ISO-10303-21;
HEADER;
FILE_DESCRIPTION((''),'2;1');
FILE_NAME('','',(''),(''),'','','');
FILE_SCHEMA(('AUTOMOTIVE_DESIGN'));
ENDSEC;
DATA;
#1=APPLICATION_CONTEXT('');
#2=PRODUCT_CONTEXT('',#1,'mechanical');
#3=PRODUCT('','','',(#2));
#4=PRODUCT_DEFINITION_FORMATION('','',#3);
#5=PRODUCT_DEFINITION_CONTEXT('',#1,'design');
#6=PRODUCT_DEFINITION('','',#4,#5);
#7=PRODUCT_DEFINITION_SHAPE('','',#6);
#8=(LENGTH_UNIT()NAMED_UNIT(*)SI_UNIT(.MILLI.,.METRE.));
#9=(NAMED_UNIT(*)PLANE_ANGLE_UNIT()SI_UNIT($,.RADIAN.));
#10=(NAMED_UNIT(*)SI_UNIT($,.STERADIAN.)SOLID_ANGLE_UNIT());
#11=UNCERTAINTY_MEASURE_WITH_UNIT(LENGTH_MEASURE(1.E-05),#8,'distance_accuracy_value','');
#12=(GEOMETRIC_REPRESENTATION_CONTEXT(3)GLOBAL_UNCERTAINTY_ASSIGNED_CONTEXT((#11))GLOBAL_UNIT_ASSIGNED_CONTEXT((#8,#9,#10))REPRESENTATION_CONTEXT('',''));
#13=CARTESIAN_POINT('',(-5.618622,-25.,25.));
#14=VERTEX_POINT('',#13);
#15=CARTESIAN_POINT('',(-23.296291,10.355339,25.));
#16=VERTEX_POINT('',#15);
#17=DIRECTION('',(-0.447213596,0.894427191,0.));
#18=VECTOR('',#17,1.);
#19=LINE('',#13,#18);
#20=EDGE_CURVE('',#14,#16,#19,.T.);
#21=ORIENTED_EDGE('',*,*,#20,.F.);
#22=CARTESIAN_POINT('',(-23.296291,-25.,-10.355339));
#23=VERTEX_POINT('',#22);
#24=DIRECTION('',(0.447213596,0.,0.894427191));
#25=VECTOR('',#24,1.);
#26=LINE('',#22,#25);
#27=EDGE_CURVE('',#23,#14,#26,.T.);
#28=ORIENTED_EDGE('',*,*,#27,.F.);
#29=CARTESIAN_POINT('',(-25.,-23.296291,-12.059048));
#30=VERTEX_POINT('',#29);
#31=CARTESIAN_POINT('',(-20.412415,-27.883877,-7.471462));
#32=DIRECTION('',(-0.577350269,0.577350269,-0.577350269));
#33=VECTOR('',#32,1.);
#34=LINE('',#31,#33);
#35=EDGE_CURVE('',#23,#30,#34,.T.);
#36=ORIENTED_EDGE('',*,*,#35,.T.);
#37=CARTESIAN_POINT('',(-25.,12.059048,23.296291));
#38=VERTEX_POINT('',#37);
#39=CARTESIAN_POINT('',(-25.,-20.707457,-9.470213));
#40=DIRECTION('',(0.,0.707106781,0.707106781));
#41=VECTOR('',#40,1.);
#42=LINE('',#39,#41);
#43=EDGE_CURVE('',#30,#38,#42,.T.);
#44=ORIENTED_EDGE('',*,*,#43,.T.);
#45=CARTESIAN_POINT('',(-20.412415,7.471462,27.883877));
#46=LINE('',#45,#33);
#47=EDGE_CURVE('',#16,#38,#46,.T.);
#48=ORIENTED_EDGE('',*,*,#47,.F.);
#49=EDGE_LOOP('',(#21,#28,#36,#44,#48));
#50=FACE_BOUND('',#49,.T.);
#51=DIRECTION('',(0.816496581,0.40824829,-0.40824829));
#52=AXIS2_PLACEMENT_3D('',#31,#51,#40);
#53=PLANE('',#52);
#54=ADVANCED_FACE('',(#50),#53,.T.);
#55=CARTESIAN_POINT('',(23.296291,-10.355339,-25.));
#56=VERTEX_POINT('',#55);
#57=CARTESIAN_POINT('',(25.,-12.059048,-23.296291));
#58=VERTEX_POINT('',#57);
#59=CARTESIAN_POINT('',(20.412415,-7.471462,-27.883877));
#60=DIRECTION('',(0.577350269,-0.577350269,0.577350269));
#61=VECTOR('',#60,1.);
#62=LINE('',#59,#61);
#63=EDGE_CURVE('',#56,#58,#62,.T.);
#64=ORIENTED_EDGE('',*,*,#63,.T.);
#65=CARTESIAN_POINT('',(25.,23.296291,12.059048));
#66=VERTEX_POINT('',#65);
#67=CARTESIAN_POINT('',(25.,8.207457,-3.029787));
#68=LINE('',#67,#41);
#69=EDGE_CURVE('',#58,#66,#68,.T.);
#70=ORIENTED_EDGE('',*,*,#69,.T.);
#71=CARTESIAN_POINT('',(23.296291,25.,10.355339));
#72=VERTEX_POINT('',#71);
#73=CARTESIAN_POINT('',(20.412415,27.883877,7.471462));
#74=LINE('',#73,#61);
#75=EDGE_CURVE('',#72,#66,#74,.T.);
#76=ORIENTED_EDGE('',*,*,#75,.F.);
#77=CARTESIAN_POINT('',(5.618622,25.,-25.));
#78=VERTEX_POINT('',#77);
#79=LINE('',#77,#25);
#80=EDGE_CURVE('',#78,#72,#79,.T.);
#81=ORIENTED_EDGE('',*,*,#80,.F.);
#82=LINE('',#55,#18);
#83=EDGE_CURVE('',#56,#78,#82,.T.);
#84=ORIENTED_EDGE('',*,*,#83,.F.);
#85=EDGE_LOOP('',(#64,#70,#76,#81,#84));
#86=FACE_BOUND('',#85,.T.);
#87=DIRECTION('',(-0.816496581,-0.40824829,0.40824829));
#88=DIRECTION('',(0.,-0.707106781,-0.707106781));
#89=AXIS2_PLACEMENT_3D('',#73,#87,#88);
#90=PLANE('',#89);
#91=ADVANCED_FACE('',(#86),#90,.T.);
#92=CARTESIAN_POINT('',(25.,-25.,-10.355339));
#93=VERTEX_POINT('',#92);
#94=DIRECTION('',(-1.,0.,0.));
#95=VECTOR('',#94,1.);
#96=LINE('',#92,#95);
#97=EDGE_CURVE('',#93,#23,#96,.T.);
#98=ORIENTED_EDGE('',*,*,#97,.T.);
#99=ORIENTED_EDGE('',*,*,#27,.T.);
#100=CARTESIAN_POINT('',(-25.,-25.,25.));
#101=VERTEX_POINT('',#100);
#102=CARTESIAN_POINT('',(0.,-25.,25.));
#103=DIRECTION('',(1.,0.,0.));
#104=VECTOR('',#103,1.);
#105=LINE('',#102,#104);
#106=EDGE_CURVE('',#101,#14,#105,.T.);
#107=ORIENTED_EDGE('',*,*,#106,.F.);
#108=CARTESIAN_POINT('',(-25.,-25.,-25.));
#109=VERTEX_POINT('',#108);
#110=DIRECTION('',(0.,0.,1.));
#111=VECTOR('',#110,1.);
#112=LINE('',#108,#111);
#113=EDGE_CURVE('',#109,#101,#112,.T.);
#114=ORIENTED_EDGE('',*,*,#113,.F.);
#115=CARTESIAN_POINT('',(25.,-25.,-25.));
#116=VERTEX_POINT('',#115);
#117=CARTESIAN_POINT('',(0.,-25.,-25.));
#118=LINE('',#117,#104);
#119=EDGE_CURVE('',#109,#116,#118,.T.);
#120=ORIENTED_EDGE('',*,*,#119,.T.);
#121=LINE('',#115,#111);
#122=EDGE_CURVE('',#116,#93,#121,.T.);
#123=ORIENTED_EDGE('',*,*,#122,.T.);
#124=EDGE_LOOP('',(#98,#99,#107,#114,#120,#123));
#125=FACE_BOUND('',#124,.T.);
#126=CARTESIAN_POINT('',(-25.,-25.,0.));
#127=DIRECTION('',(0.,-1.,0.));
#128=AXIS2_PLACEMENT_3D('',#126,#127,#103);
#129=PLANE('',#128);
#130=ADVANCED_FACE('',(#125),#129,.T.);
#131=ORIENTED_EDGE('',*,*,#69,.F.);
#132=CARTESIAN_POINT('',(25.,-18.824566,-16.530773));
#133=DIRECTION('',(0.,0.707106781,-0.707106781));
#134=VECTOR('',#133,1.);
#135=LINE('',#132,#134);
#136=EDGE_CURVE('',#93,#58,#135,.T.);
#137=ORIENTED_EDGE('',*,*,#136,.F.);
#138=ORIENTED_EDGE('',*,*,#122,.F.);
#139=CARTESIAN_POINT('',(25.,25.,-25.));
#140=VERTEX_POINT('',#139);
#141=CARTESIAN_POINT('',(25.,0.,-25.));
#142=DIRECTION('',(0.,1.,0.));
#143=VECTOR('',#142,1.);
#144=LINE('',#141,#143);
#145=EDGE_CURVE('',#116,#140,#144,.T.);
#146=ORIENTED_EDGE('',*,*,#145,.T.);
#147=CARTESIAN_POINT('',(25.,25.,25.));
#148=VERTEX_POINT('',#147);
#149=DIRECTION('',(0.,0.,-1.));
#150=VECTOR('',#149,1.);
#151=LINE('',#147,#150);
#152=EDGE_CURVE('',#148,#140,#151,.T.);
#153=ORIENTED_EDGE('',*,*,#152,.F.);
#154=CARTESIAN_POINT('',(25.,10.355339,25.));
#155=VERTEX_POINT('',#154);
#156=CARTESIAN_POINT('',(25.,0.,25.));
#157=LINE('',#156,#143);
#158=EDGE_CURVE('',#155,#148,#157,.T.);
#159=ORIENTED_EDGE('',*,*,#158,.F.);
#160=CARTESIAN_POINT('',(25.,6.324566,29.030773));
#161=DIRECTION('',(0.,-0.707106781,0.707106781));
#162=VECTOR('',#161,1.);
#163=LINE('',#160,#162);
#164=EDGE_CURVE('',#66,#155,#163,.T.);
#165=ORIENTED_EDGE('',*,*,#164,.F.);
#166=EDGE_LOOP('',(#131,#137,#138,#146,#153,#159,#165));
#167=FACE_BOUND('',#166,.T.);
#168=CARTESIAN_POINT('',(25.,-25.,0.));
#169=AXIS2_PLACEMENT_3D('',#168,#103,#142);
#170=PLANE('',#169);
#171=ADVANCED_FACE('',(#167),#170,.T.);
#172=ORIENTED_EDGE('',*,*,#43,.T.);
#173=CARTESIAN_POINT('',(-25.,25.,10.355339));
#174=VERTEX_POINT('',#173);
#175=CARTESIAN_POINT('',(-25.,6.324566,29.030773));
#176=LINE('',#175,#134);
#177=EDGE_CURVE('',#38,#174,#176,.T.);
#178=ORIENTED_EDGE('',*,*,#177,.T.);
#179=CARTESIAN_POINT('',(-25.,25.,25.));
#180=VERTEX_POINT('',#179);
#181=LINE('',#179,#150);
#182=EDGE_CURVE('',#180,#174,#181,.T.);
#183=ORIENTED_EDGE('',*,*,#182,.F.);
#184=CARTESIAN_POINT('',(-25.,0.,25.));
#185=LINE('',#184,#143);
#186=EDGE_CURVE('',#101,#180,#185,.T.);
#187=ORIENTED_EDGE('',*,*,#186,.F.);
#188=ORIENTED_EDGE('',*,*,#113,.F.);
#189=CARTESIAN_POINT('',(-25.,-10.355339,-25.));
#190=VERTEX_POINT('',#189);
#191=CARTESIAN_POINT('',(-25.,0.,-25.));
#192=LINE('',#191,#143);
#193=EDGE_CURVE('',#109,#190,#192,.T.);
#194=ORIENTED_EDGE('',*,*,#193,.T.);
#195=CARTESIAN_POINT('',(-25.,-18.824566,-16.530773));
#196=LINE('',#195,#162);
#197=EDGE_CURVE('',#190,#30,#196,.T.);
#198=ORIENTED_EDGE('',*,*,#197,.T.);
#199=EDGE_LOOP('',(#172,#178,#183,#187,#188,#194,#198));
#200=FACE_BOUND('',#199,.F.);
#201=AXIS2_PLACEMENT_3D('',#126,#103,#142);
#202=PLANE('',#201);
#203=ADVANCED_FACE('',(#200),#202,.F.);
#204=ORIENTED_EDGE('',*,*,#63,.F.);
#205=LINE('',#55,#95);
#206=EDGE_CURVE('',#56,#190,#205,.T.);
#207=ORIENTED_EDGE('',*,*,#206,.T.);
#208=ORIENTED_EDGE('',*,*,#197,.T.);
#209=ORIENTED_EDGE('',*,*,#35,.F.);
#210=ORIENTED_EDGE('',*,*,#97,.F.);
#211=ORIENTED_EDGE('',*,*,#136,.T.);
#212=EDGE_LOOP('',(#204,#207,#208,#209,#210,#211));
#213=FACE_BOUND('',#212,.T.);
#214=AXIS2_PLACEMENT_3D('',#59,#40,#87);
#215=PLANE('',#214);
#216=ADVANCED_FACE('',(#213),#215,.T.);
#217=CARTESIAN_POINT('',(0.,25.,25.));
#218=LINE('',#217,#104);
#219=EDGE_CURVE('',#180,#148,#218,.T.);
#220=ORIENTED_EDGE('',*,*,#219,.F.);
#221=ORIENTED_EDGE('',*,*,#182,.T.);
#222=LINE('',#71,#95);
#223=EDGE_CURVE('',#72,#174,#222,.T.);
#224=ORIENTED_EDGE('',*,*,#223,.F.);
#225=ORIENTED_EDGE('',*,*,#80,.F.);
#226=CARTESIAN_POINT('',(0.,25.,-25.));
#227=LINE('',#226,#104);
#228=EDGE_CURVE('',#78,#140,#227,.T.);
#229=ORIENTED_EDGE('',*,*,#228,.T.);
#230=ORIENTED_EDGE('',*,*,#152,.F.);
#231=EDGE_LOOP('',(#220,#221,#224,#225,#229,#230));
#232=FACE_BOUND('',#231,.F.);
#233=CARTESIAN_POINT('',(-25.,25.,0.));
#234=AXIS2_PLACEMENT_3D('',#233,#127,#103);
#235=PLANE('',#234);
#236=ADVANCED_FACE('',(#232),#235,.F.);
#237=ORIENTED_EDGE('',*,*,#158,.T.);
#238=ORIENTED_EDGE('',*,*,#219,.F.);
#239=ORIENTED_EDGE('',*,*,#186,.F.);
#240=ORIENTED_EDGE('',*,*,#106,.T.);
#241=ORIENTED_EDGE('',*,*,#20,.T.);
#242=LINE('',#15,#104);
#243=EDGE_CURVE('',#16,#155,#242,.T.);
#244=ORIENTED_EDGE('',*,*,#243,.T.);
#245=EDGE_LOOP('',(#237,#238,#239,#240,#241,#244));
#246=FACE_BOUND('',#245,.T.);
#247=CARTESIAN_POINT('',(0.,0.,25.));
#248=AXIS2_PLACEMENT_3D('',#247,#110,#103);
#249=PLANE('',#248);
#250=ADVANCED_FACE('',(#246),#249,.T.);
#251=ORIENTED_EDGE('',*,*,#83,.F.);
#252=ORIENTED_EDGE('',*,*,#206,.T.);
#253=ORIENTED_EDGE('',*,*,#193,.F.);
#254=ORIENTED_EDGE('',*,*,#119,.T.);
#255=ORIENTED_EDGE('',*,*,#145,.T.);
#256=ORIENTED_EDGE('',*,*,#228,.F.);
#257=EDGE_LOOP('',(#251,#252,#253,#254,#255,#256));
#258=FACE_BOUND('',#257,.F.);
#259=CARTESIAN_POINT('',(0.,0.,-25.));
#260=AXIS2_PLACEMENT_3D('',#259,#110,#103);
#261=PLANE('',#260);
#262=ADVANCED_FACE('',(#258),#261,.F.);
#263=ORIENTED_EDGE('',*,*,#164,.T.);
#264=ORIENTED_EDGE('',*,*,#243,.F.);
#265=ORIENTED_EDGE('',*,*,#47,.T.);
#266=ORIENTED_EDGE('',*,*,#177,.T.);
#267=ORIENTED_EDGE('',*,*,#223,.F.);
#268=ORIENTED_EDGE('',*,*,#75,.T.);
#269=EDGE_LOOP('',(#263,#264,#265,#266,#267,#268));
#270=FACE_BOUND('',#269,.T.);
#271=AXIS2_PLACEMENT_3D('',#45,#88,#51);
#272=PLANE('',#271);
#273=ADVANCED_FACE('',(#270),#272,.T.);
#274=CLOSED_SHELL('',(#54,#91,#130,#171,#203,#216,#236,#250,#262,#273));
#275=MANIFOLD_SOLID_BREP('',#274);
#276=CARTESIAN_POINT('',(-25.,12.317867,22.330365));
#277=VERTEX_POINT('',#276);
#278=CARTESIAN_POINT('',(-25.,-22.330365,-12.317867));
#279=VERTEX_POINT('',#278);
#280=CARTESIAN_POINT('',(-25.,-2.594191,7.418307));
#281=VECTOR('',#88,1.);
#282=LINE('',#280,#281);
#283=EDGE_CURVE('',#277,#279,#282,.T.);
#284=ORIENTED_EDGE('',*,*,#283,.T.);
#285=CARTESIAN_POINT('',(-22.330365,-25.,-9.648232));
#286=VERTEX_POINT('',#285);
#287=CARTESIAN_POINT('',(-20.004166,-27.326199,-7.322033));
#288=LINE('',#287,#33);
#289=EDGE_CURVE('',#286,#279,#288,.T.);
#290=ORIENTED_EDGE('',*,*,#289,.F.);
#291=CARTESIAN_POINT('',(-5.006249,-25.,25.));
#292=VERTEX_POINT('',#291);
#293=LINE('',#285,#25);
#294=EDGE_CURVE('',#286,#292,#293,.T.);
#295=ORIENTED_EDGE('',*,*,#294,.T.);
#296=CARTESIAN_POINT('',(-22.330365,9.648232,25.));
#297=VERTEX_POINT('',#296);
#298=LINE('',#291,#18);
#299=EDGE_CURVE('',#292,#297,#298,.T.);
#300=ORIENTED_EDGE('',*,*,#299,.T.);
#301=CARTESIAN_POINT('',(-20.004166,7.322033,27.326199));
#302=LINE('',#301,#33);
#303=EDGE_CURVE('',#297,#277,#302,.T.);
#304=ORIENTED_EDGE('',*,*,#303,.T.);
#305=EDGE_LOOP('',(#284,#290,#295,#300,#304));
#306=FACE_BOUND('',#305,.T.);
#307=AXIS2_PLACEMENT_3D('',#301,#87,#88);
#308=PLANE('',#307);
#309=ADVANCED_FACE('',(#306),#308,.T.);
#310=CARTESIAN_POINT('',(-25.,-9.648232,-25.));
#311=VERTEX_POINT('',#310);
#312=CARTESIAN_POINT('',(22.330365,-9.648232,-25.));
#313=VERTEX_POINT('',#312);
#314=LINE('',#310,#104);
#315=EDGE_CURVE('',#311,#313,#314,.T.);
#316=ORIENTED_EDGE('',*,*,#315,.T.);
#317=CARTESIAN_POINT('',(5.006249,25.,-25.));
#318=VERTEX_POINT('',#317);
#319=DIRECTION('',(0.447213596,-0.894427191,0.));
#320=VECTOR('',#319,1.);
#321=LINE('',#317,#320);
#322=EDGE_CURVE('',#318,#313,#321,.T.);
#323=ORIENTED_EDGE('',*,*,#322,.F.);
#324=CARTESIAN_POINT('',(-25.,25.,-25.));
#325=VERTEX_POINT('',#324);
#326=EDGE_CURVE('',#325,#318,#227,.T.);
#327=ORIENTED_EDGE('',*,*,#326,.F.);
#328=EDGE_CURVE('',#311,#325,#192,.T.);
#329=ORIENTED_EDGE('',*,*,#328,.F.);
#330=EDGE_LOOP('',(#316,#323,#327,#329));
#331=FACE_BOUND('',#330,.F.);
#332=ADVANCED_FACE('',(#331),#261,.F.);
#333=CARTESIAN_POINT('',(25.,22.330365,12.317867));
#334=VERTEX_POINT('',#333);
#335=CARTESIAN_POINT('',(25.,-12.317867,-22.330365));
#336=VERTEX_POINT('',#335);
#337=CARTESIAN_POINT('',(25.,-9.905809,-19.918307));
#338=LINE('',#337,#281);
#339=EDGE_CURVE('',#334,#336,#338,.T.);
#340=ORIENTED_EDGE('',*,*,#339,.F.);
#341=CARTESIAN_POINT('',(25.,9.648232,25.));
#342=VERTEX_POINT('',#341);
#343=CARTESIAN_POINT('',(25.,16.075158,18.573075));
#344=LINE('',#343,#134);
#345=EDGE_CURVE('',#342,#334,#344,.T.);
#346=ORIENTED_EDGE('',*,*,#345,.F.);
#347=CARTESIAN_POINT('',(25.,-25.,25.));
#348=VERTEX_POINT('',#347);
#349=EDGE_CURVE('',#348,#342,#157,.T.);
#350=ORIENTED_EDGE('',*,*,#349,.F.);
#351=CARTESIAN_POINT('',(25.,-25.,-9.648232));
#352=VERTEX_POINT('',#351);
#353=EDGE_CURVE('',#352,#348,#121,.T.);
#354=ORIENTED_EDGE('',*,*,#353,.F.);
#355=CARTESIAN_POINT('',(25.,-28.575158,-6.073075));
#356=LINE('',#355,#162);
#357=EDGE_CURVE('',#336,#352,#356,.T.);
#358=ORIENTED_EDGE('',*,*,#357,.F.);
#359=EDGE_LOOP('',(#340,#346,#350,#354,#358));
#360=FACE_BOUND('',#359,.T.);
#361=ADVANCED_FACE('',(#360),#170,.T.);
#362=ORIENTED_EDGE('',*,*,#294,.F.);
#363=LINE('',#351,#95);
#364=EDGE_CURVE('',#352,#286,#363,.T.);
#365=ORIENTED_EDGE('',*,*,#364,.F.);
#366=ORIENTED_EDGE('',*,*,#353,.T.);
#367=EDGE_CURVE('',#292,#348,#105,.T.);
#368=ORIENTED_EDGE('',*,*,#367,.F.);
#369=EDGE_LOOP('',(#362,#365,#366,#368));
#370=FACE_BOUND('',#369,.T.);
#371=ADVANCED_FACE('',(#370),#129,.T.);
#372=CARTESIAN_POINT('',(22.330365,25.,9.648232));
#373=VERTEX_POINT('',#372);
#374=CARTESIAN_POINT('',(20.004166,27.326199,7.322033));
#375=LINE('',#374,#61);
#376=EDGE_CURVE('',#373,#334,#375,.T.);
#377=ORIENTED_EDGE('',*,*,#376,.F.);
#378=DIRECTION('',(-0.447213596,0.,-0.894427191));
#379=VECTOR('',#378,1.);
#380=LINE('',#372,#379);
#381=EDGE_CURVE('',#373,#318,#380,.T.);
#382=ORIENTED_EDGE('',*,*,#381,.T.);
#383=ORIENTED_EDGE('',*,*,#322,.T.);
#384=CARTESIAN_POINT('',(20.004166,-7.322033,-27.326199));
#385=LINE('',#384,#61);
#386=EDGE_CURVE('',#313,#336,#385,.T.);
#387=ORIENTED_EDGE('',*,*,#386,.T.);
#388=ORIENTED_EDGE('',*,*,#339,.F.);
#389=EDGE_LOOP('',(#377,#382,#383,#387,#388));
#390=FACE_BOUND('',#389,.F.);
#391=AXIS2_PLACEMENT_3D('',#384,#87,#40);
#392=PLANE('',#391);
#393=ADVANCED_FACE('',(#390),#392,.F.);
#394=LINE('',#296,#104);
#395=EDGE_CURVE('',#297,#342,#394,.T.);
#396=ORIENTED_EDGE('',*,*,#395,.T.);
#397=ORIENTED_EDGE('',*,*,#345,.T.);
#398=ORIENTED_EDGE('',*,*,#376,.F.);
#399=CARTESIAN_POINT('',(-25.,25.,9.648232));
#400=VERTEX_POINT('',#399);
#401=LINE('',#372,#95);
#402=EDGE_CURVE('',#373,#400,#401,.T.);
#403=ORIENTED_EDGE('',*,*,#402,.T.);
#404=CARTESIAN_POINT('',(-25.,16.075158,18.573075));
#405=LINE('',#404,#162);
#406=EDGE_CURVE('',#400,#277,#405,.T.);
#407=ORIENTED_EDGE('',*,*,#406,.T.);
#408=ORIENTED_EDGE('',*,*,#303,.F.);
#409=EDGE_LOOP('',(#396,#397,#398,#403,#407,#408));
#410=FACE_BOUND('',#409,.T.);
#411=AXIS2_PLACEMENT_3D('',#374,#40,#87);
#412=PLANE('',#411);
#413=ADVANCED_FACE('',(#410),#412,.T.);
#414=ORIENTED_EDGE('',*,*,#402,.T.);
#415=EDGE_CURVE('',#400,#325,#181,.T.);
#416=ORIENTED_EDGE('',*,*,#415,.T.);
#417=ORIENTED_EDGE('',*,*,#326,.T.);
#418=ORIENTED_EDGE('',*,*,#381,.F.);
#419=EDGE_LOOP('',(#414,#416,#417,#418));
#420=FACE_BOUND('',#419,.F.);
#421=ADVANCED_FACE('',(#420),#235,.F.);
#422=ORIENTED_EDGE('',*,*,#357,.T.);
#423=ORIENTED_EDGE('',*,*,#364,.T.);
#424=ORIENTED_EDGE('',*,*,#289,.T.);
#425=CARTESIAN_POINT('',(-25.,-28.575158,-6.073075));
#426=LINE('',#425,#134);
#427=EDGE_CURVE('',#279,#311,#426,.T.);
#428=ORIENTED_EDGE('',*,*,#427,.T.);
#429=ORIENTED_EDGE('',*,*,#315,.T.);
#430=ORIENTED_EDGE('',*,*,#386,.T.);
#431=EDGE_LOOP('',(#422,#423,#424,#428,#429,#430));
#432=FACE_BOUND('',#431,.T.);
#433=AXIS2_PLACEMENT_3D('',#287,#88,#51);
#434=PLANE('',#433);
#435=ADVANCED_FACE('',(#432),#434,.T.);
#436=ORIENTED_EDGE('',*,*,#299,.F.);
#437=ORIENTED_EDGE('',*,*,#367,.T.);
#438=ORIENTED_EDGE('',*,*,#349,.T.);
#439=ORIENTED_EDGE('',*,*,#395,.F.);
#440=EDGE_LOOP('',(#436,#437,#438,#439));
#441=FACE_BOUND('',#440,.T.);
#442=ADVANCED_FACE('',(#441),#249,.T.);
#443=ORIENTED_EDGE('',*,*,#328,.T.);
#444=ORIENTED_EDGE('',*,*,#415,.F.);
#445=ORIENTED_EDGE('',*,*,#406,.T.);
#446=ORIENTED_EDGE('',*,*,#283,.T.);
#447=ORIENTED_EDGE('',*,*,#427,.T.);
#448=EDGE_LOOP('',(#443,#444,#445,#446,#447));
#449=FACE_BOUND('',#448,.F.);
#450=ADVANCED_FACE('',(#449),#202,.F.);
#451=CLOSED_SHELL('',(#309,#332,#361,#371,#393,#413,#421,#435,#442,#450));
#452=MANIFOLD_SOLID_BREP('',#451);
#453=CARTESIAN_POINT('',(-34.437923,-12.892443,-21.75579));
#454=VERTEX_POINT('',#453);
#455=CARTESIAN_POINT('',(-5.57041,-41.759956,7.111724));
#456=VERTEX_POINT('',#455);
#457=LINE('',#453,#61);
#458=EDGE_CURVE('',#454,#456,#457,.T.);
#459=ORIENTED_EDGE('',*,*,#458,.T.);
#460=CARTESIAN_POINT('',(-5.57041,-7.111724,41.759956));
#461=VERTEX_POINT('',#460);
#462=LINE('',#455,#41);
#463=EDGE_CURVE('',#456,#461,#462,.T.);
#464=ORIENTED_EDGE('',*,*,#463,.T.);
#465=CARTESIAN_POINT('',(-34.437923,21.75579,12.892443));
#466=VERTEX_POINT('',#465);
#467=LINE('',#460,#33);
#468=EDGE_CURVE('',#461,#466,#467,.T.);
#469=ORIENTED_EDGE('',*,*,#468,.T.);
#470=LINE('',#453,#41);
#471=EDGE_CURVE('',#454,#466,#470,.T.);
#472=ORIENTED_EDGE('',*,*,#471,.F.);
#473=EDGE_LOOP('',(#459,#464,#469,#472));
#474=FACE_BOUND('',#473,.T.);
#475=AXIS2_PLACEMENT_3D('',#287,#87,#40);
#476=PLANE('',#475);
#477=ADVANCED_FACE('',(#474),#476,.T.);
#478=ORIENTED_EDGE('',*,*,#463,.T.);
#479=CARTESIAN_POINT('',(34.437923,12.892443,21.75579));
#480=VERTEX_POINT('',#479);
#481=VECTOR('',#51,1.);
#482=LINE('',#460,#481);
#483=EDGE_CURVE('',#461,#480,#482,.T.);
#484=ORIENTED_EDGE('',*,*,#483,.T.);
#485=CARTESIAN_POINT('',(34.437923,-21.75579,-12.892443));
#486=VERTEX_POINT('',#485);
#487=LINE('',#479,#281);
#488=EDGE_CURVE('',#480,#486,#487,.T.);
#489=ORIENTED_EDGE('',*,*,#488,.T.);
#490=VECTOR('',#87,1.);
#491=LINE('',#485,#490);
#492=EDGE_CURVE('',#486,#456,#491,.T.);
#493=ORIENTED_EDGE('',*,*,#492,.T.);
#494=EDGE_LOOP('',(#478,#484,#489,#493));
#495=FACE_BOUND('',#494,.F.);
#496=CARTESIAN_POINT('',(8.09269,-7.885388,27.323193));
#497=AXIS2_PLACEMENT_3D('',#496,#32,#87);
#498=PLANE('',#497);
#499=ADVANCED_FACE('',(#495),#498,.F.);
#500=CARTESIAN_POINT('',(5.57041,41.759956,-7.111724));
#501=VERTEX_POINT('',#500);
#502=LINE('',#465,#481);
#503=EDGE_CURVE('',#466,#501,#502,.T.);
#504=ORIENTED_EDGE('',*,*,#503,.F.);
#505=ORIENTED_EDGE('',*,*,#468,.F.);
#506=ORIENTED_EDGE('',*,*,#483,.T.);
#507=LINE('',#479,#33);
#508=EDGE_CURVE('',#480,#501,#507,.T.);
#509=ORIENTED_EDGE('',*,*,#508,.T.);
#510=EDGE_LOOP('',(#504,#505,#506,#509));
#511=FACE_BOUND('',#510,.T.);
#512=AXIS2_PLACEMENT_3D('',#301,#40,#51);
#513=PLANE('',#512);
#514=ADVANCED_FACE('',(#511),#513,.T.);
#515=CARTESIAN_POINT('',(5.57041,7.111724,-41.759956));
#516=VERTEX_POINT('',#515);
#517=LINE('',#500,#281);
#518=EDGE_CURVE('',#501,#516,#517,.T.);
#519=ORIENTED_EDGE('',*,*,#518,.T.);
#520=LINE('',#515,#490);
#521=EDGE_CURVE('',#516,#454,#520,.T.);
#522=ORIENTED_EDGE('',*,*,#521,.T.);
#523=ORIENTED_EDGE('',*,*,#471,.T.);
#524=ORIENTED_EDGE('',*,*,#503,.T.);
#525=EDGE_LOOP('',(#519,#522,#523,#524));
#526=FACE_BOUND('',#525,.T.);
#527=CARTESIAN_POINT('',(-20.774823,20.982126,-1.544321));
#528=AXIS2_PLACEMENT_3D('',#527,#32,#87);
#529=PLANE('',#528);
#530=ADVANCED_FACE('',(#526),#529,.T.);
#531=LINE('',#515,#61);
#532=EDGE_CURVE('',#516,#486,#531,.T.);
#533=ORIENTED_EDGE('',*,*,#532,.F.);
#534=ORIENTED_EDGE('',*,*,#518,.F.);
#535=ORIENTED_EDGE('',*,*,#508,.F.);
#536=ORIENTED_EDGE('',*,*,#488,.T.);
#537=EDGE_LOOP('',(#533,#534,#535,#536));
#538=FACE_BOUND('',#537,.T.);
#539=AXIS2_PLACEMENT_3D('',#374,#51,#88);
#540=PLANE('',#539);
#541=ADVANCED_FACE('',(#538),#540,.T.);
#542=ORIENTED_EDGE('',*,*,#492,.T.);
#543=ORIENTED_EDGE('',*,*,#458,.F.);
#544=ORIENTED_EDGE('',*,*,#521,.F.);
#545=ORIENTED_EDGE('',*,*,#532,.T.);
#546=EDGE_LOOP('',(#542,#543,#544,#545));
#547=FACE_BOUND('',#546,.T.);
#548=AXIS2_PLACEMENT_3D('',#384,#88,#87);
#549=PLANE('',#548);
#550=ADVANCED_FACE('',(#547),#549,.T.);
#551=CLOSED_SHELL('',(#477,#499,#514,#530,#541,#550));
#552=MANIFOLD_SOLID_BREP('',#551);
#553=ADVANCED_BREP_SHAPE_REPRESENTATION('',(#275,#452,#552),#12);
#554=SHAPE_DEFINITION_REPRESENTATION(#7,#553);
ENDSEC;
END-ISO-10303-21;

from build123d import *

# Parameters (mm, degrees)
F1_W          = 50
F1_H          = 50
F2_DEPTH      = 25
F5_DEPTH      = 43.3022701892
F5_DEPTH_BACK = 43.3022701892
F6_DEPTH      = 25


with BuildPart() as f2:
    # F1 (on Top) → F2 (new body, symmetric)
    with BuildSketch(Plane.XY):
        Rectangle(F1_W, F1_H)
    extrude(amount=F2_DEPTH, both=True)

    # F4 (on mid) → F5 (cut, two sides)
    with BuildSketch(Plane(origin=(0, 0, 0), x_dir=(-0.8164965809, -0.4082482905, 0.4082482905), z_dir=(-0.5773502692, 0.5773502692, -0.5773502692))) as f5_sk:
        Polygon((-25, -25), (-14.4337567297, -25), (-14.1450815951, -24.5), (-24.5, -24.5), (-24.5, 24.5), (-14.1450815951, 24.5), (-14.4337567297, 25), (-25, 25), align=None)
        Polygon((-14.1450815951, -24.5), (-14.4337567297, -25), (25, -25), (25, 0), (24.5, 0), (24.5, -24.5), align=None)
        Polygon((25, 25), (-14.4337567297, 25), (-14.1450815951, 24.5), (24.5, 24.5), (24.5, 0), (25, 0), align=None)
    extrude(amount=-F5_DEPTH, mode=Mode.SUBTRACT)
    extrude(f5_sk.sketch, amount=F5_DEPTH_BACK, mode=Mode.SUBTRACT)


with BuildPart() as f6:
    # F4 (on mid) → F6 (new body, symmetric)
    with BuildSketch(Plane(origin=(0, 0, 0), x_dir=(-0.8164965809, -0.4082482905, 0.4082482905), z_dir=(-0.5773502692, 0.5773502692, -0.5773502692))):
        Polygon((-14.1450815951, 24.5), (0, 0), (24.5, 0), (24.5, 24.5), align=None)
        Polygon((0, 0), (-14.1450815951, -24.5), (24.5, -24.5), (24.5, 0), align=None)
        Polygon((-24.5, -24.5), (-14.1450815951, -24.5), (0, 0), (-14.1450815951, 24.5), (-24.5, 24.5), align=None)
    extrude(amount=F6_DEPTH, both=True)


solid = Compound([f2.part, f6.part])
